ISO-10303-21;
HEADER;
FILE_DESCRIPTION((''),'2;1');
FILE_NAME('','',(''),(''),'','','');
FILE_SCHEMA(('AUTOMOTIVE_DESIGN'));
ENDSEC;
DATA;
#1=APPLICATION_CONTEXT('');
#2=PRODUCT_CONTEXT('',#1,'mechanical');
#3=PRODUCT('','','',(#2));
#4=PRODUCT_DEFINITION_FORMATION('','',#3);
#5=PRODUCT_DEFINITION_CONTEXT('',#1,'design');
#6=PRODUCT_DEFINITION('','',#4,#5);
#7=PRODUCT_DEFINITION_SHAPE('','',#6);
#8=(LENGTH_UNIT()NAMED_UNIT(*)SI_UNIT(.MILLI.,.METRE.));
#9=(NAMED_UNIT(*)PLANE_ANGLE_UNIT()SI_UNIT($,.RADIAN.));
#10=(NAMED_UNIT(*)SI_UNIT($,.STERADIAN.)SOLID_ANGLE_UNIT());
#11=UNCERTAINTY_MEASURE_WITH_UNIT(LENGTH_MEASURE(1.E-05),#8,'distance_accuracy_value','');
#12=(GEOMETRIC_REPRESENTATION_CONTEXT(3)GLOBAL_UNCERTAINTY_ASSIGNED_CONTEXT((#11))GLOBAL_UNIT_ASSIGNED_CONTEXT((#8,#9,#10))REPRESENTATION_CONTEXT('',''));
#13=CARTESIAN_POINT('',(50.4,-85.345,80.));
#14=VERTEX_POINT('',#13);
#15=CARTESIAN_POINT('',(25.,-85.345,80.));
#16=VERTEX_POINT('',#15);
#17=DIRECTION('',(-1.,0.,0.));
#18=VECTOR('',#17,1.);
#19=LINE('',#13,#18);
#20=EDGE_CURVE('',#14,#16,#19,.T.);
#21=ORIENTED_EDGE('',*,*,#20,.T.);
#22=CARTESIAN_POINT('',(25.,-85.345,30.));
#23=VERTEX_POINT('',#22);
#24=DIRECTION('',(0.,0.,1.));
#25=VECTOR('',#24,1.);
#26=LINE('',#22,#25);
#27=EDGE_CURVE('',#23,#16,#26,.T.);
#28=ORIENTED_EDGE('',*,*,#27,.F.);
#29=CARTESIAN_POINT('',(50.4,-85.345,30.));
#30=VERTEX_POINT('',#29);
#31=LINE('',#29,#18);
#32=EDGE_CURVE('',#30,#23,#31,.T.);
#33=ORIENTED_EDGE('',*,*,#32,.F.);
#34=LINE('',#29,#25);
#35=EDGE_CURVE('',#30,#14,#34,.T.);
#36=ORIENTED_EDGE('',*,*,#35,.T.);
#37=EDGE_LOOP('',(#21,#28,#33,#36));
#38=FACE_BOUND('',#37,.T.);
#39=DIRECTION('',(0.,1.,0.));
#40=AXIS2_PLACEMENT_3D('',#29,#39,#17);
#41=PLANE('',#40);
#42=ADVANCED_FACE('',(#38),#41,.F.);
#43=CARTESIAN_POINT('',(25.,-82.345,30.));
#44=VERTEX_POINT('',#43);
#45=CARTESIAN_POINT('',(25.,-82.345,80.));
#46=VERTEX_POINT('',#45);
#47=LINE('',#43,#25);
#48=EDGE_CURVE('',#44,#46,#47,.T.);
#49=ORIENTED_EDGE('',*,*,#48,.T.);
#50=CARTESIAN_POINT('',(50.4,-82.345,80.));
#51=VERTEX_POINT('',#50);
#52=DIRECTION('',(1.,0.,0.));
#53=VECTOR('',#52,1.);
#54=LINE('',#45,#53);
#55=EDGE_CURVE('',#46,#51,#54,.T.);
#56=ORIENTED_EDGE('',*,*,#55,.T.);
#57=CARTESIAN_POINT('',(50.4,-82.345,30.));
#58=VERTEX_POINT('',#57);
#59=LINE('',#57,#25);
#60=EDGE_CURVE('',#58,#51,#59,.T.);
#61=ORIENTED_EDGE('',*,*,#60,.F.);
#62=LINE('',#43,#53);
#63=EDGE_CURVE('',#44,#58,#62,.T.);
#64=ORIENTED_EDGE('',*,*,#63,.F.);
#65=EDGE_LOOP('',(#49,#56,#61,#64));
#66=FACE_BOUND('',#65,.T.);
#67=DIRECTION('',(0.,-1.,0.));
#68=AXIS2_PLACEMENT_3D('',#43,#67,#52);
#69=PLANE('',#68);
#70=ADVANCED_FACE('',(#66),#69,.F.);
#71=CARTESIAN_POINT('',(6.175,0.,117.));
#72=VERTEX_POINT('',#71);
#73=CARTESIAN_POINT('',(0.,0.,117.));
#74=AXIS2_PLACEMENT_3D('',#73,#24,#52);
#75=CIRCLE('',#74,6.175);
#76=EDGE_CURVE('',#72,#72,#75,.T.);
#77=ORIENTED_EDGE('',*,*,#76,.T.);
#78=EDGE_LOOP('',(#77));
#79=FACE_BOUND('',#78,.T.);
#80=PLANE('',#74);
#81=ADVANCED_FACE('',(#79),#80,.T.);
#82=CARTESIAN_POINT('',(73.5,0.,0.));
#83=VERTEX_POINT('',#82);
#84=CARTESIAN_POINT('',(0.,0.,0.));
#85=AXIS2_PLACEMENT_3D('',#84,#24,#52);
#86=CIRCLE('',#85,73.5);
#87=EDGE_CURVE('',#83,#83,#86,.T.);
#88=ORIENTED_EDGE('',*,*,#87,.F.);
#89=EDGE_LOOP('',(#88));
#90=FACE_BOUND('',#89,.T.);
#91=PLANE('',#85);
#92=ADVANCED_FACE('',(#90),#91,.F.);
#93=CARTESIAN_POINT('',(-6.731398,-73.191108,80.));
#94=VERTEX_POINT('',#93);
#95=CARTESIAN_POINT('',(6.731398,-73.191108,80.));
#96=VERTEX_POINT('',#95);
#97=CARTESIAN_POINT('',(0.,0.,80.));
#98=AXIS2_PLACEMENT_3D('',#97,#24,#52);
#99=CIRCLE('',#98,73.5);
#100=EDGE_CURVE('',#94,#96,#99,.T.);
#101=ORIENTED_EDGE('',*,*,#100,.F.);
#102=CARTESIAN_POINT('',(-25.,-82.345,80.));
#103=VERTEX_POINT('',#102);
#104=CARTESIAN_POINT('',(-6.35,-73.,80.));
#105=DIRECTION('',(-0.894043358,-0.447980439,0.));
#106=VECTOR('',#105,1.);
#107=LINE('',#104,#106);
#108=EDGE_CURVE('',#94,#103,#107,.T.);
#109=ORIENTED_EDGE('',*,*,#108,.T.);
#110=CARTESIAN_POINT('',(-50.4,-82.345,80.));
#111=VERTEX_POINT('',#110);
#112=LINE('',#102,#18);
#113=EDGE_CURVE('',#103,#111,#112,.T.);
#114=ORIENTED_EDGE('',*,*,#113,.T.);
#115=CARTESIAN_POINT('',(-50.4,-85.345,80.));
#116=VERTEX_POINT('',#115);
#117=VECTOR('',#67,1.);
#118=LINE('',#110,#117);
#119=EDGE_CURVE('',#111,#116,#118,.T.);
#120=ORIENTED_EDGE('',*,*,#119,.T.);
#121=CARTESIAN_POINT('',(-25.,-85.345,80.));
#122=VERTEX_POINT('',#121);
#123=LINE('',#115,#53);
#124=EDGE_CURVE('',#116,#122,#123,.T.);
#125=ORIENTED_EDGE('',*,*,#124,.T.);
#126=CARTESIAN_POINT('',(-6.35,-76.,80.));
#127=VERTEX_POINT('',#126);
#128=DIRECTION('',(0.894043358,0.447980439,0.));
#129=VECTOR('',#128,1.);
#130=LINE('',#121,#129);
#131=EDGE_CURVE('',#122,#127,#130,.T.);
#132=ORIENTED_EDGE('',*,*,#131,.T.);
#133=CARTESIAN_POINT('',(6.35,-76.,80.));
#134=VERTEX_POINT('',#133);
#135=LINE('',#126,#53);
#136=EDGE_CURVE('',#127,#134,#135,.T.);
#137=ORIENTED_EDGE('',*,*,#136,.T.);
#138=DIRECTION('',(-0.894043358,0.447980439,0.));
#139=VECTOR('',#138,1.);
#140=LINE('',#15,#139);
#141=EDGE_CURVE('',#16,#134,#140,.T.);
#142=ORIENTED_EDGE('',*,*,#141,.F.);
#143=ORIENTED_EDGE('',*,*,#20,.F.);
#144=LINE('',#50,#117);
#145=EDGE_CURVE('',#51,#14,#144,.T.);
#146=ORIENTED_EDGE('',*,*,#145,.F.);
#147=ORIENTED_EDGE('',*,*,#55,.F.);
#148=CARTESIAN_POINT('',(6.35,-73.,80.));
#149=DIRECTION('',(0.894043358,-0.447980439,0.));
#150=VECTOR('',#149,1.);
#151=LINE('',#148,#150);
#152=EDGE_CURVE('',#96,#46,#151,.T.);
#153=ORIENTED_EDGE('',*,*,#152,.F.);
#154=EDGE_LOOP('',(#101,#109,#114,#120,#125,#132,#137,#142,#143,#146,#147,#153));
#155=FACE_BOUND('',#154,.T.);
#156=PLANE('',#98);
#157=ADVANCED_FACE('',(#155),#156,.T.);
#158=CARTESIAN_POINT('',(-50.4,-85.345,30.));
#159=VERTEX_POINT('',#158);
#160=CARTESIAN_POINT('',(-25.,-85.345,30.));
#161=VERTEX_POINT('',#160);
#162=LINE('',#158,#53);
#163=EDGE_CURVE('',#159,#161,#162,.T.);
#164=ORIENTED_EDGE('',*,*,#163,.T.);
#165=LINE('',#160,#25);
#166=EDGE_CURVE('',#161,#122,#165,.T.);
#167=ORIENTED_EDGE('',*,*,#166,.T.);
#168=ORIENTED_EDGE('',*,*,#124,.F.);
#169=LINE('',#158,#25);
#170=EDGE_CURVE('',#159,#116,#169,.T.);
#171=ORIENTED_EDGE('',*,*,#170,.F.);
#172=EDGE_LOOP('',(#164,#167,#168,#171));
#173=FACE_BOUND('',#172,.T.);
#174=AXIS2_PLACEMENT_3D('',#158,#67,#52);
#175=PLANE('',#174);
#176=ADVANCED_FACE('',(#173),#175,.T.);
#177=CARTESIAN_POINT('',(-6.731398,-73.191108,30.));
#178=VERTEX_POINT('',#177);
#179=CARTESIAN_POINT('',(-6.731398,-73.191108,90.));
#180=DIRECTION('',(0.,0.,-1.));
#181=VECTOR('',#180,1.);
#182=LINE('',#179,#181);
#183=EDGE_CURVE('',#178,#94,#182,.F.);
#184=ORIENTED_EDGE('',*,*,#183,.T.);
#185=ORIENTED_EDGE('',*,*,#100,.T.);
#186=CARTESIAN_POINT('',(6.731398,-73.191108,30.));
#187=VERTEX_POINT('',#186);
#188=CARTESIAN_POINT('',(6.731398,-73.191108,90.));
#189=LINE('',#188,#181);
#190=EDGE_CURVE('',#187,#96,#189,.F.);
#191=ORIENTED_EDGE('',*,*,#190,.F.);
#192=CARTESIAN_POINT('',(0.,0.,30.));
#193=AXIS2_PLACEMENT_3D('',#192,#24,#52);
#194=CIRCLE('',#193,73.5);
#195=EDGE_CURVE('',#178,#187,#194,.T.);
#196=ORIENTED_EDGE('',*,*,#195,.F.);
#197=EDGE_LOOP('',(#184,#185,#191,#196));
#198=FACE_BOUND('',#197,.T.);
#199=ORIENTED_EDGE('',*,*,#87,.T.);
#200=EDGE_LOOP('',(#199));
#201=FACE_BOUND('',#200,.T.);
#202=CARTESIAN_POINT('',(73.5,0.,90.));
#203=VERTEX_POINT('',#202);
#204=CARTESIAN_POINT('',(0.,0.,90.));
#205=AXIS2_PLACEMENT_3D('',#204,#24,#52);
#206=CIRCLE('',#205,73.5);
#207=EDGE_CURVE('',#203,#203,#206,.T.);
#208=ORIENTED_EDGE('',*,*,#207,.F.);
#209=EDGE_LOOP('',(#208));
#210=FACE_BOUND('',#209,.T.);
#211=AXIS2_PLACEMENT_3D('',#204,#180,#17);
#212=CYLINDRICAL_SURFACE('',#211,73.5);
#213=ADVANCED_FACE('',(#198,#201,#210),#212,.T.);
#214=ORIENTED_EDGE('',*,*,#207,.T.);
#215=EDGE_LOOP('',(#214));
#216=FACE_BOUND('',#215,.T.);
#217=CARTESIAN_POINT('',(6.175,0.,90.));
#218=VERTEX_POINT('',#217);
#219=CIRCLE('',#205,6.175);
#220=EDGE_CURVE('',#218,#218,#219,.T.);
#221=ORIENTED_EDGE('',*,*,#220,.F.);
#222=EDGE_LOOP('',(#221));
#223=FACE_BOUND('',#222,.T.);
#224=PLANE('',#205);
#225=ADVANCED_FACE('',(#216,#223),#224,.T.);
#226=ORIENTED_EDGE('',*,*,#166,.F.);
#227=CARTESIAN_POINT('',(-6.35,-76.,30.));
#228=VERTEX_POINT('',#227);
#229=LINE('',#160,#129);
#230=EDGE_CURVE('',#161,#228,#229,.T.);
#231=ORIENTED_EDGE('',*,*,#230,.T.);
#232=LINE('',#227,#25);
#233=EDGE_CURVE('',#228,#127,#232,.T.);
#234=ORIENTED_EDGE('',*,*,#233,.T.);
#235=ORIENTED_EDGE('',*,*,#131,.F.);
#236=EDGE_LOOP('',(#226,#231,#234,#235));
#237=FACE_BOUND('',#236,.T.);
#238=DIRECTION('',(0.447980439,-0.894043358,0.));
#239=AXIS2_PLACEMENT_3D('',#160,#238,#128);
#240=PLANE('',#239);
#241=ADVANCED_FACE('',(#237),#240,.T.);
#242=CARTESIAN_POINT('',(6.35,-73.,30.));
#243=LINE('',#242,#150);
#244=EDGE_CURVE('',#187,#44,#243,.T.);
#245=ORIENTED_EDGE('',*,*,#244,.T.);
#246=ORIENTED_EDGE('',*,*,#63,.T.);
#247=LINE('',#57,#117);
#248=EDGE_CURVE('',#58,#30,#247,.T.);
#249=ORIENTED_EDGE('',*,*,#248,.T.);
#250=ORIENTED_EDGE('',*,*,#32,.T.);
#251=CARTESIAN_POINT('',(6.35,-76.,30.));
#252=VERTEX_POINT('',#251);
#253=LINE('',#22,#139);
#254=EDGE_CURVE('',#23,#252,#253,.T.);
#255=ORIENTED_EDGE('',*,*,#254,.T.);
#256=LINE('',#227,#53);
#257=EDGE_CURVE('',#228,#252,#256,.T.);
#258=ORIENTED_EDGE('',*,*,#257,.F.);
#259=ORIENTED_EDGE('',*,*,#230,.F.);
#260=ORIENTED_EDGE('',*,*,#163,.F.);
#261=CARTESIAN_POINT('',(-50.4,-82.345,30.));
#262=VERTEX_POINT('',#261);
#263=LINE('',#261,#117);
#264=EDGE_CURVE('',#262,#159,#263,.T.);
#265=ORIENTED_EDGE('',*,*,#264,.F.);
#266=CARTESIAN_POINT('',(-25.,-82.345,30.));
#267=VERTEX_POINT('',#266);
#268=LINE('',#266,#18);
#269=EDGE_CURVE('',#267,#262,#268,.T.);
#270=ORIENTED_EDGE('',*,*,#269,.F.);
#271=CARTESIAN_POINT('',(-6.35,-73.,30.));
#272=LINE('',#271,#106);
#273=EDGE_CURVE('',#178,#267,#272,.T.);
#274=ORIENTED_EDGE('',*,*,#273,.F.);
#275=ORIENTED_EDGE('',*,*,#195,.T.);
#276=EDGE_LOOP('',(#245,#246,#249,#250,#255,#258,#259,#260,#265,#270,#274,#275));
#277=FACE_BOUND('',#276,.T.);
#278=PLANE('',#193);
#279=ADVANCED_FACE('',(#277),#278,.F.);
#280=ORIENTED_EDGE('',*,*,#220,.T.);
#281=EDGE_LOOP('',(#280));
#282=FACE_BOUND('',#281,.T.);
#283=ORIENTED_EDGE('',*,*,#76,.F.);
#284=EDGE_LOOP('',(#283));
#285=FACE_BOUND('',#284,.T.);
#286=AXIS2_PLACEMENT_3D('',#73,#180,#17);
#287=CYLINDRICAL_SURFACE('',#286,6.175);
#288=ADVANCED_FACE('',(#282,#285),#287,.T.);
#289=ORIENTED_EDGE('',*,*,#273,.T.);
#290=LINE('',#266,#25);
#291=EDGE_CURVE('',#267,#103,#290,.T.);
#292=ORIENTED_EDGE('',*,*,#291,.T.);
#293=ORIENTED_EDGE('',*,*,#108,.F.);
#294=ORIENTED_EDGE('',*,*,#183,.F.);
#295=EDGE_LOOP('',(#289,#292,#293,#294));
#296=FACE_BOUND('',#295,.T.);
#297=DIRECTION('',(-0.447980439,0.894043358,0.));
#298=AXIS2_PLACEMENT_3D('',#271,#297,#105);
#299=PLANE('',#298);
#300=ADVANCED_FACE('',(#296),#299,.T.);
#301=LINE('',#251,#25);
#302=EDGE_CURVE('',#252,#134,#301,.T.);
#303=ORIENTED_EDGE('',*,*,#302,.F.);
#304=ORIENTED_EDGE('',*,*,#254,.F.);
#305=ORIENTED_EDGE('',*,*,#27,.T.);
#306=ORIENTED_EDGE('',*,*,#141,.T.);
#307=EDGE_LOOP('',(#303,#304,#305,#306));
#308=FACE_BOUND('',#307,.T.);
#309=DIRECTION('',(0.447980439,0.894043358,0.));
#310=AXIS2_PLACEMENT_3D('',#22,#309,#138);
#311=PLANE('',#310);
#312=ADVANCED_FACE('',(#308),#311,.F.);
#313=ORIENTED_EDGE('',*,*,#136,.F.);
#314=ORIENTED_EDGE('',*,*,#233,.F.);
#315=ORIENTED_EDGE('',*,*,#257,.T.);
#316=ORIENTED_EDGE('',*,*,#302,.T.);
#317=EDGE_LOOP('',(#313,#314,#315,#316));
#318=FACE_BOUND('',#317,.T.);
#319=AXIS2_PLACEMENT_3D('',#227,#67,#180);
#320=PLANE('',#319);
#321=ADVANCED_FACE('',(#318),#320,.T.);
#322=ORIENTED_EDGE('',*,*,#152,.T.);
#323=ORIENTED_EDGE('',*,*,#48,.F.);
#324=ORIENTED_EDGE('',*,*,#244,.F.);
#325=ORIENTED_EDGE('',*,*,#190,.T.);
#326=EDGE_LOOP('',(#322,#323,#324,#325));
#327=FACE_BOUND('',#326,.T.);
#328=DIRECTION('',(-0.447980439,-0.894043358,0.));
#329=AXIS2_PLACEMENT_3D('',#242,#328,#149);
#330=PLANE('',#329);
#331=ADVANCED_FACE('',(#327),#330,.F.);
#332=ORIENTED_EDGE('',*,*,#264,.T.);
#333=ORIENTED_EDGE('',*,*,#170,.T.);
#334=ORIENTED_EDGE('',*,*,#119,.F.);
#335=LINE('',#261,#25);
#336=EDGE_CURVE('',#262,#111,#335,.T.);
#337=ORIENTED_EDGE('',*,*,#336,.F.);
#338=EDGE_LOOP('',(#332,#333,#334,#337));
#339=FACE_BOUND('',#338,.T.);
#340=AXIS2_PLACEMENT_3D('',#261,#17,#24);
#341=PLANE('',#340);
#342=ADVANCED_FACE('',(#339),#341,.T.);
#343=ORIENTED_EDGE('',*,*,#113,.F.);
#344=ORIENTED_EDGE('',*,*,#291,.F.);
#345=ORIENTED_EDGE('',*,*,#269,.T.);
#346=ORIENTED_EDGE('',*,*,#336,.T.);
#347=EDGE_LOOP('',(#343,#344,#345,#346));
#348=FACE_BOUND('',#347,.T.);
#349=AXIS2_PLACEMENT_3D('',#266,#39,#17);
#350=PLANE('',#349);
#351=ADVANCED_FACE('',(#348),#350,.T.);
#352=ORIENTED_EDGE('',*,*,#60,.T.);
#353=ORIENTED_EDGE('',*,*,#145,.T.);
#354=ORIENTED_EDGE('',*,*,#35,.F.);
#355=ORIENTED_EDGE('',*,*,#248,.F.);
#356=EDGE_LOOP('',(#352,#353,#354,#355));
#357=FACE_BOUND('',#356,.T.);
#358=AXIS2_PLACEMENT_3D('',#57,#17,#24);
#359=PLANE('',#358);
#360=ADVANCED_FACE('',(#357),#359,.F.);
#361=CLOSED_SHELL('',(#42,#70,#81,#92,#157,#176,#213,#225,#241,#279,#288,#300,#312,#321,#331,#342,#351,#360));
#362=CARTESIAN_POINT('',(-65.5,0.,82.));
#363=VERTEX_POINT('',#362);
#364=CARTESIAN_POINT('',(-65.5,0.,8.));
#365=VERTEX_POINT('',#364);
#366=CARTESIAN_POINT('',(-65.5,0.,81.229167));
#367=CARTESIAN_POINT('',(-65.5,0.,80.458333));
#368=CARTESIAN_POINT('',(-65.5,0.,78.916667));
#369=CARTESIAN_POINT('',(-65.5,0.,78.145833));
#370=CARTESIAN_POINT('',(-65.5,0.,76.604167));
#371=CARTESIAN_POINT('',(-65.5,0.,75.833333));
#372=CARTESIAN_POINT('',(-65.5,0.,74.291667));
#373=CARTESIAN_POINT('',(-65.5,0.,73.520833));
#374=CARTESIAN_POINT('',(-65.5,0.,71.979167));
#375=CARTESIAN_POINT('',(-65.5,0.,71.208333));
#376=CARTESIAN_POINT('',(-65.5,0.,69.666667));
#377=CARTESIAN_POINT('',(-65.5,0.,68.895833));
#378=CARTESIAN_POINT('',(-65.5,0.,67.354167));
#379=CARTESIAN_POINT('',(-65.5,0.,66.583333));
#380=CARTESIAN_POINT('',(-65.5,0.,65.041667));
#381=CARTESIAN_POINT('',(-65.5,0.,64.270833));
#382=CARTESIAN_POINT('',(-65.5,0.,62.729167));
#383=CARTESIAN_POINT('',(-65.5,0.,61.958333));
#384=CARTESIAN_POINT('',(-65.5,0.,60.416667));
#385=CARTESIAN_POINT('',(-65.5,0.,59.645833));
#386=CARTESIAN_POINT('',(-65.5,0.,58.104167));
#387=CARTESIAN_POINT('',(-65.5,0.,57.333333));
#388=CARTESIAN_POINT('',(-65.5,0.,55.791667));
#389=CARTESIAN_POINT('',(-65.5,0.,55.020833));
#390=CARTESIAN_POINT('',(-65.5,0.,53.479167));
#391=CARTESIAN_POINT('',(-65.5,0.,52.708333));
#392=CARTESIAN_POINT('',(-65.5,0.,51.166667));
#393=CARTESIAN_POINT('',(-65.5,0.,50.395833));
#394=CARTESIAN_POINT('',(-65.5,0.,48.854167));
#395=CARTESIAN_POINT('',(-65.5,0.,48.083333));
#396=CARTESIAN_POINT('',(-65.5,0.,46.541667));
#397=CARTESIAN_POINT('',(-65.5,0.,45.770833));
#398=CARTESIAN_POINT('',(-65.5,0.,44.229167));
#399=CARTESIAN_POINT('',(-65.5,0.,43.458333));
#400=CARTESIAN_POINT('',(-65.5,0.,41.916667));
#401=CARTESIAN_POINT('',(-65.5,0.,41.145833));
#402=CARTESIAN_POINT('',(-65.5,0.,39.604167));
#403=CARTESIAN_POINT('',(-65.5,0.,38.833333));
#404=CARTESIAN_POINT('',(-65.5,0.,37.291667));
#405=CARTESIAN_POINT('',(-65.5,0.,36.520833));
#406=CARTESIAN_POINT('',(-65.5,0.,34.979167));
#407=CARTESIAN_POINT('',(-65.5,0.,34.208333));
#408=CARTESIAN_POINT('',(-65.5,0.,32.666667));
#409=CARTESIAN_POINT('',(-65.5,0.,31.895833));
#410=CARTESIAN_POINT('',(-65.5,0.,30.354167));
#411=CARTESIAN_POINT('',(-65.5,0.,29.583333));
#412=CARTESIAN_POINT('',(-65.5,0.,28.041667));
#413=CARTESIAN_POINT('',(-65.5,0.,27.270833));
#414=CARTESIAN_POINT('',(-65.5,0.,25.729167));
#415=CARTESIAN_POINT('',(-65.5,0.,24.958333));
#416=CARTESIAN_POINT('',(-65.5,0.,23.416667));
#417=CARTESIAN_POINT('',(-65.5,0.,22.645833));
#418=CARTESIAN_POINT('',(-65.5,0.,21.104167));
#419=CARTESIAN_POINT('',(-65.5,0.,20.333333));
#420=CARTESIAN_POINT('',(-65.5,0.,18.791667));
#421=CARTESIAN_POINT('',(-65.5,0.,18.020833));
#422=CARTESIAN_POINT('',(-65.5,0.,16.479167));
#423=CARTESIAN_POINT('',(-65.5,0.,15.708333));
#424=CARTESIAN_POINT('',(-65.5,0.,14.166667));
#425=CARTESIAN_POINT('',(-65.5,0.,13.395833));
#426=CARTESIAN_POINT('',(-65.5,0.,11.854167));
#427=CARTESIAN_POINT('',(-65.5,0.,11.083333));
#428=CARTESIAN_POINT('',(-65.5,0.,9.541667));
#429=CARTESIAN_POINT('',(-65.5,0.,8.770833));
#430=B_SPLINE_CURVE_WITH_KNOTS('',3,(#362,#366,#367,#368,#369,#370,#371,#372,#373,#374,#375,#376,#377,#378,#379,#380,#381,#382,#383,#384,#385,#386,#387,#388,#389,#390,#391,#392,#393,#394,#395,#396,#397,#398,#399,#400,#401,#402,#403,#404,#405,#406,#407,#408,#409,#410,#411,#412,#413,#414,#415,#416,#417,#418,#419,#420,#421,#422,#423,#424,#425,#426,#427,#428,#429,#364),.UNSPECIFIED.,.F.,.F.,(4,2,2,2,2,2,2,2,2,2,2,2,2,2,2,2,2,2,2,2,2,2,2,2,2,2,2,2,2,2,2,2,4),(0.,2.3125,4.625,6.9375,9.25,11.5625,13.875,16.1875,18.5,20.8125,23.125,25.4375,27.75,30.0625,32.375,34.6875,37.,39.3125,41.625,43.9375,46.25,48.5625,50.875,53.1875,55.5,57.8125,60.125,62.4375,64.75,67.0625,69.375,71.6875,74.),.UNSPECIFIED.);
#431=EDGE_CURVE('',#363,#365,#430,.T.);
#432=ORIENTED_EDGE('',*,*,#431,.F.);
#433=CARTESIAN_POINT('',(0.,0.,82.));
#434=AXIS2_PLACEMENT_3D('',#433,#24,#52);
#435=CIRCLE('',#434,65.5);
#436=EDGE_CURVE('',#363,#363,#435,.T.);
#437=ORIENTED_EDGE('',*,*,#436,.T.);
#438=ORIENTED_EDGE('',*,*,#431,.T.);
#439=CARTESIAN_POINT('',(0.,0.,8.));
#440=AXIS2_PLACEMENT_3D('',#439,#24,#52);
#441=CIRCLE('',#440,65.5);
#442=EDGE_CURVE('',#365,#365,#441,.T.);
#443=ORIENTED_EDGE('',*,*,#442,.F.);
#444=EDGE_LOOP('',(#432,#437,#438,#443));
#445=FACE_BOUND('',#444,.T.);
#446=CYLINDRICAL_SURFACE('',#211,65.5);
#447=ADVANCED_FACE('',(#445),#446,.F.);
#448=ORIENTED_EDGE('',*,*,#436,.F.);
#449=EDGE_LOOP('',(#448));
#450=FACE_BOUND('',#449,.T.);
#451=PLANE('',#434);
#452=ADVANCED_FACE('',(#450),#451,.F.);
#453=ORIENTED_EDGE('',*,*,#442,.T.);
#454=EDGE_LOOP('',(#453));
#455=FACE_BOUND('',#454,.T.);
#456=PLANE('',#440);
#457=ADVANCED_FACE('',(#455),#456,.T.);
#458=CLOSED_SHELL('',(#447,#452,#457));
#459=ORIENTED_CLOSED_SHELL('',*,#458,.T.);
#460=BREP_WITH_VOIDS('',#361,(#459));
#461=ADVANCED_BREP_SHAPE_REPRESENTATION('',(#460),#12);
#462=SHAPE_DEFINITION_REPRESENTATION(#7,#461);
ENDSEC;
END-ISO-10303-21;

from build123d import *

# Parameters (mm, degrees)
SKETCH1_R           = 73.5
BOSS_EXTRUDE1_DEPTH = 90
SKETCH2_R           = 6.175
BOSS_EXTRUDE2_DEPTH = 27
BOSS_EXTRUDE3_DEPTH = 50
SHELL1_START        = 8
SHELL1_OUTLINE_R    = 65.5
SHELL1_DEPTH        = 74


# Read off the part's stored shape, not the designer's step: Shell1
with BuildPart() as part:
    # Sketch1 → Boss-Extrude1 (new body)
    with BuildSketch(Plane.XY):
        with Locations(Location((0, 0, 0), (0, 0, 180))):
            Circle(SKETCH1_R)
    extrude(amount=BOSS_EXTRUDE1_DEPTH)

    # Sketch2 → Boss-Extrude2 (add)
    with BuildSketch(Plane.XY.offset(90)):
        Circle(SKETCH2_R)
    extrude(amount=BOSS_EXTRUDE2_DEPTH)

    # Sketch3 → Boss-Extrude3 (add)
    with BuildSketch(Plane.XY.offset(80)):
        Polygon((-50.4, -85.345), (-25, -85.345), (-6.35, -76), (0, -76), (0, -73), (-6.35, -73), (-25, -82.345), (-50.4, -82.345), align=None)
    boss_extrude3 = extrude(amount=-BOSS_EXTRUDE3_DEPTH)

    # Mirror1: Boss-Extrude3 across plane
    add(boss_extrude3.mirror(Plane(origin=(0, 0, 0), x_dir=(0, 0, 1), z_dir=(1, 0, 0))))

    # Shell1 outline → Shell1 (cut)
    with BuildSketch(Plane.XY.offset(SHELL1_START)):
        Circle(SHELL1_OUTLINE_R)
    extrude(amount=SHELL1_DEPTH, mode=Mode.SUBTRACT)


solid = part.part
